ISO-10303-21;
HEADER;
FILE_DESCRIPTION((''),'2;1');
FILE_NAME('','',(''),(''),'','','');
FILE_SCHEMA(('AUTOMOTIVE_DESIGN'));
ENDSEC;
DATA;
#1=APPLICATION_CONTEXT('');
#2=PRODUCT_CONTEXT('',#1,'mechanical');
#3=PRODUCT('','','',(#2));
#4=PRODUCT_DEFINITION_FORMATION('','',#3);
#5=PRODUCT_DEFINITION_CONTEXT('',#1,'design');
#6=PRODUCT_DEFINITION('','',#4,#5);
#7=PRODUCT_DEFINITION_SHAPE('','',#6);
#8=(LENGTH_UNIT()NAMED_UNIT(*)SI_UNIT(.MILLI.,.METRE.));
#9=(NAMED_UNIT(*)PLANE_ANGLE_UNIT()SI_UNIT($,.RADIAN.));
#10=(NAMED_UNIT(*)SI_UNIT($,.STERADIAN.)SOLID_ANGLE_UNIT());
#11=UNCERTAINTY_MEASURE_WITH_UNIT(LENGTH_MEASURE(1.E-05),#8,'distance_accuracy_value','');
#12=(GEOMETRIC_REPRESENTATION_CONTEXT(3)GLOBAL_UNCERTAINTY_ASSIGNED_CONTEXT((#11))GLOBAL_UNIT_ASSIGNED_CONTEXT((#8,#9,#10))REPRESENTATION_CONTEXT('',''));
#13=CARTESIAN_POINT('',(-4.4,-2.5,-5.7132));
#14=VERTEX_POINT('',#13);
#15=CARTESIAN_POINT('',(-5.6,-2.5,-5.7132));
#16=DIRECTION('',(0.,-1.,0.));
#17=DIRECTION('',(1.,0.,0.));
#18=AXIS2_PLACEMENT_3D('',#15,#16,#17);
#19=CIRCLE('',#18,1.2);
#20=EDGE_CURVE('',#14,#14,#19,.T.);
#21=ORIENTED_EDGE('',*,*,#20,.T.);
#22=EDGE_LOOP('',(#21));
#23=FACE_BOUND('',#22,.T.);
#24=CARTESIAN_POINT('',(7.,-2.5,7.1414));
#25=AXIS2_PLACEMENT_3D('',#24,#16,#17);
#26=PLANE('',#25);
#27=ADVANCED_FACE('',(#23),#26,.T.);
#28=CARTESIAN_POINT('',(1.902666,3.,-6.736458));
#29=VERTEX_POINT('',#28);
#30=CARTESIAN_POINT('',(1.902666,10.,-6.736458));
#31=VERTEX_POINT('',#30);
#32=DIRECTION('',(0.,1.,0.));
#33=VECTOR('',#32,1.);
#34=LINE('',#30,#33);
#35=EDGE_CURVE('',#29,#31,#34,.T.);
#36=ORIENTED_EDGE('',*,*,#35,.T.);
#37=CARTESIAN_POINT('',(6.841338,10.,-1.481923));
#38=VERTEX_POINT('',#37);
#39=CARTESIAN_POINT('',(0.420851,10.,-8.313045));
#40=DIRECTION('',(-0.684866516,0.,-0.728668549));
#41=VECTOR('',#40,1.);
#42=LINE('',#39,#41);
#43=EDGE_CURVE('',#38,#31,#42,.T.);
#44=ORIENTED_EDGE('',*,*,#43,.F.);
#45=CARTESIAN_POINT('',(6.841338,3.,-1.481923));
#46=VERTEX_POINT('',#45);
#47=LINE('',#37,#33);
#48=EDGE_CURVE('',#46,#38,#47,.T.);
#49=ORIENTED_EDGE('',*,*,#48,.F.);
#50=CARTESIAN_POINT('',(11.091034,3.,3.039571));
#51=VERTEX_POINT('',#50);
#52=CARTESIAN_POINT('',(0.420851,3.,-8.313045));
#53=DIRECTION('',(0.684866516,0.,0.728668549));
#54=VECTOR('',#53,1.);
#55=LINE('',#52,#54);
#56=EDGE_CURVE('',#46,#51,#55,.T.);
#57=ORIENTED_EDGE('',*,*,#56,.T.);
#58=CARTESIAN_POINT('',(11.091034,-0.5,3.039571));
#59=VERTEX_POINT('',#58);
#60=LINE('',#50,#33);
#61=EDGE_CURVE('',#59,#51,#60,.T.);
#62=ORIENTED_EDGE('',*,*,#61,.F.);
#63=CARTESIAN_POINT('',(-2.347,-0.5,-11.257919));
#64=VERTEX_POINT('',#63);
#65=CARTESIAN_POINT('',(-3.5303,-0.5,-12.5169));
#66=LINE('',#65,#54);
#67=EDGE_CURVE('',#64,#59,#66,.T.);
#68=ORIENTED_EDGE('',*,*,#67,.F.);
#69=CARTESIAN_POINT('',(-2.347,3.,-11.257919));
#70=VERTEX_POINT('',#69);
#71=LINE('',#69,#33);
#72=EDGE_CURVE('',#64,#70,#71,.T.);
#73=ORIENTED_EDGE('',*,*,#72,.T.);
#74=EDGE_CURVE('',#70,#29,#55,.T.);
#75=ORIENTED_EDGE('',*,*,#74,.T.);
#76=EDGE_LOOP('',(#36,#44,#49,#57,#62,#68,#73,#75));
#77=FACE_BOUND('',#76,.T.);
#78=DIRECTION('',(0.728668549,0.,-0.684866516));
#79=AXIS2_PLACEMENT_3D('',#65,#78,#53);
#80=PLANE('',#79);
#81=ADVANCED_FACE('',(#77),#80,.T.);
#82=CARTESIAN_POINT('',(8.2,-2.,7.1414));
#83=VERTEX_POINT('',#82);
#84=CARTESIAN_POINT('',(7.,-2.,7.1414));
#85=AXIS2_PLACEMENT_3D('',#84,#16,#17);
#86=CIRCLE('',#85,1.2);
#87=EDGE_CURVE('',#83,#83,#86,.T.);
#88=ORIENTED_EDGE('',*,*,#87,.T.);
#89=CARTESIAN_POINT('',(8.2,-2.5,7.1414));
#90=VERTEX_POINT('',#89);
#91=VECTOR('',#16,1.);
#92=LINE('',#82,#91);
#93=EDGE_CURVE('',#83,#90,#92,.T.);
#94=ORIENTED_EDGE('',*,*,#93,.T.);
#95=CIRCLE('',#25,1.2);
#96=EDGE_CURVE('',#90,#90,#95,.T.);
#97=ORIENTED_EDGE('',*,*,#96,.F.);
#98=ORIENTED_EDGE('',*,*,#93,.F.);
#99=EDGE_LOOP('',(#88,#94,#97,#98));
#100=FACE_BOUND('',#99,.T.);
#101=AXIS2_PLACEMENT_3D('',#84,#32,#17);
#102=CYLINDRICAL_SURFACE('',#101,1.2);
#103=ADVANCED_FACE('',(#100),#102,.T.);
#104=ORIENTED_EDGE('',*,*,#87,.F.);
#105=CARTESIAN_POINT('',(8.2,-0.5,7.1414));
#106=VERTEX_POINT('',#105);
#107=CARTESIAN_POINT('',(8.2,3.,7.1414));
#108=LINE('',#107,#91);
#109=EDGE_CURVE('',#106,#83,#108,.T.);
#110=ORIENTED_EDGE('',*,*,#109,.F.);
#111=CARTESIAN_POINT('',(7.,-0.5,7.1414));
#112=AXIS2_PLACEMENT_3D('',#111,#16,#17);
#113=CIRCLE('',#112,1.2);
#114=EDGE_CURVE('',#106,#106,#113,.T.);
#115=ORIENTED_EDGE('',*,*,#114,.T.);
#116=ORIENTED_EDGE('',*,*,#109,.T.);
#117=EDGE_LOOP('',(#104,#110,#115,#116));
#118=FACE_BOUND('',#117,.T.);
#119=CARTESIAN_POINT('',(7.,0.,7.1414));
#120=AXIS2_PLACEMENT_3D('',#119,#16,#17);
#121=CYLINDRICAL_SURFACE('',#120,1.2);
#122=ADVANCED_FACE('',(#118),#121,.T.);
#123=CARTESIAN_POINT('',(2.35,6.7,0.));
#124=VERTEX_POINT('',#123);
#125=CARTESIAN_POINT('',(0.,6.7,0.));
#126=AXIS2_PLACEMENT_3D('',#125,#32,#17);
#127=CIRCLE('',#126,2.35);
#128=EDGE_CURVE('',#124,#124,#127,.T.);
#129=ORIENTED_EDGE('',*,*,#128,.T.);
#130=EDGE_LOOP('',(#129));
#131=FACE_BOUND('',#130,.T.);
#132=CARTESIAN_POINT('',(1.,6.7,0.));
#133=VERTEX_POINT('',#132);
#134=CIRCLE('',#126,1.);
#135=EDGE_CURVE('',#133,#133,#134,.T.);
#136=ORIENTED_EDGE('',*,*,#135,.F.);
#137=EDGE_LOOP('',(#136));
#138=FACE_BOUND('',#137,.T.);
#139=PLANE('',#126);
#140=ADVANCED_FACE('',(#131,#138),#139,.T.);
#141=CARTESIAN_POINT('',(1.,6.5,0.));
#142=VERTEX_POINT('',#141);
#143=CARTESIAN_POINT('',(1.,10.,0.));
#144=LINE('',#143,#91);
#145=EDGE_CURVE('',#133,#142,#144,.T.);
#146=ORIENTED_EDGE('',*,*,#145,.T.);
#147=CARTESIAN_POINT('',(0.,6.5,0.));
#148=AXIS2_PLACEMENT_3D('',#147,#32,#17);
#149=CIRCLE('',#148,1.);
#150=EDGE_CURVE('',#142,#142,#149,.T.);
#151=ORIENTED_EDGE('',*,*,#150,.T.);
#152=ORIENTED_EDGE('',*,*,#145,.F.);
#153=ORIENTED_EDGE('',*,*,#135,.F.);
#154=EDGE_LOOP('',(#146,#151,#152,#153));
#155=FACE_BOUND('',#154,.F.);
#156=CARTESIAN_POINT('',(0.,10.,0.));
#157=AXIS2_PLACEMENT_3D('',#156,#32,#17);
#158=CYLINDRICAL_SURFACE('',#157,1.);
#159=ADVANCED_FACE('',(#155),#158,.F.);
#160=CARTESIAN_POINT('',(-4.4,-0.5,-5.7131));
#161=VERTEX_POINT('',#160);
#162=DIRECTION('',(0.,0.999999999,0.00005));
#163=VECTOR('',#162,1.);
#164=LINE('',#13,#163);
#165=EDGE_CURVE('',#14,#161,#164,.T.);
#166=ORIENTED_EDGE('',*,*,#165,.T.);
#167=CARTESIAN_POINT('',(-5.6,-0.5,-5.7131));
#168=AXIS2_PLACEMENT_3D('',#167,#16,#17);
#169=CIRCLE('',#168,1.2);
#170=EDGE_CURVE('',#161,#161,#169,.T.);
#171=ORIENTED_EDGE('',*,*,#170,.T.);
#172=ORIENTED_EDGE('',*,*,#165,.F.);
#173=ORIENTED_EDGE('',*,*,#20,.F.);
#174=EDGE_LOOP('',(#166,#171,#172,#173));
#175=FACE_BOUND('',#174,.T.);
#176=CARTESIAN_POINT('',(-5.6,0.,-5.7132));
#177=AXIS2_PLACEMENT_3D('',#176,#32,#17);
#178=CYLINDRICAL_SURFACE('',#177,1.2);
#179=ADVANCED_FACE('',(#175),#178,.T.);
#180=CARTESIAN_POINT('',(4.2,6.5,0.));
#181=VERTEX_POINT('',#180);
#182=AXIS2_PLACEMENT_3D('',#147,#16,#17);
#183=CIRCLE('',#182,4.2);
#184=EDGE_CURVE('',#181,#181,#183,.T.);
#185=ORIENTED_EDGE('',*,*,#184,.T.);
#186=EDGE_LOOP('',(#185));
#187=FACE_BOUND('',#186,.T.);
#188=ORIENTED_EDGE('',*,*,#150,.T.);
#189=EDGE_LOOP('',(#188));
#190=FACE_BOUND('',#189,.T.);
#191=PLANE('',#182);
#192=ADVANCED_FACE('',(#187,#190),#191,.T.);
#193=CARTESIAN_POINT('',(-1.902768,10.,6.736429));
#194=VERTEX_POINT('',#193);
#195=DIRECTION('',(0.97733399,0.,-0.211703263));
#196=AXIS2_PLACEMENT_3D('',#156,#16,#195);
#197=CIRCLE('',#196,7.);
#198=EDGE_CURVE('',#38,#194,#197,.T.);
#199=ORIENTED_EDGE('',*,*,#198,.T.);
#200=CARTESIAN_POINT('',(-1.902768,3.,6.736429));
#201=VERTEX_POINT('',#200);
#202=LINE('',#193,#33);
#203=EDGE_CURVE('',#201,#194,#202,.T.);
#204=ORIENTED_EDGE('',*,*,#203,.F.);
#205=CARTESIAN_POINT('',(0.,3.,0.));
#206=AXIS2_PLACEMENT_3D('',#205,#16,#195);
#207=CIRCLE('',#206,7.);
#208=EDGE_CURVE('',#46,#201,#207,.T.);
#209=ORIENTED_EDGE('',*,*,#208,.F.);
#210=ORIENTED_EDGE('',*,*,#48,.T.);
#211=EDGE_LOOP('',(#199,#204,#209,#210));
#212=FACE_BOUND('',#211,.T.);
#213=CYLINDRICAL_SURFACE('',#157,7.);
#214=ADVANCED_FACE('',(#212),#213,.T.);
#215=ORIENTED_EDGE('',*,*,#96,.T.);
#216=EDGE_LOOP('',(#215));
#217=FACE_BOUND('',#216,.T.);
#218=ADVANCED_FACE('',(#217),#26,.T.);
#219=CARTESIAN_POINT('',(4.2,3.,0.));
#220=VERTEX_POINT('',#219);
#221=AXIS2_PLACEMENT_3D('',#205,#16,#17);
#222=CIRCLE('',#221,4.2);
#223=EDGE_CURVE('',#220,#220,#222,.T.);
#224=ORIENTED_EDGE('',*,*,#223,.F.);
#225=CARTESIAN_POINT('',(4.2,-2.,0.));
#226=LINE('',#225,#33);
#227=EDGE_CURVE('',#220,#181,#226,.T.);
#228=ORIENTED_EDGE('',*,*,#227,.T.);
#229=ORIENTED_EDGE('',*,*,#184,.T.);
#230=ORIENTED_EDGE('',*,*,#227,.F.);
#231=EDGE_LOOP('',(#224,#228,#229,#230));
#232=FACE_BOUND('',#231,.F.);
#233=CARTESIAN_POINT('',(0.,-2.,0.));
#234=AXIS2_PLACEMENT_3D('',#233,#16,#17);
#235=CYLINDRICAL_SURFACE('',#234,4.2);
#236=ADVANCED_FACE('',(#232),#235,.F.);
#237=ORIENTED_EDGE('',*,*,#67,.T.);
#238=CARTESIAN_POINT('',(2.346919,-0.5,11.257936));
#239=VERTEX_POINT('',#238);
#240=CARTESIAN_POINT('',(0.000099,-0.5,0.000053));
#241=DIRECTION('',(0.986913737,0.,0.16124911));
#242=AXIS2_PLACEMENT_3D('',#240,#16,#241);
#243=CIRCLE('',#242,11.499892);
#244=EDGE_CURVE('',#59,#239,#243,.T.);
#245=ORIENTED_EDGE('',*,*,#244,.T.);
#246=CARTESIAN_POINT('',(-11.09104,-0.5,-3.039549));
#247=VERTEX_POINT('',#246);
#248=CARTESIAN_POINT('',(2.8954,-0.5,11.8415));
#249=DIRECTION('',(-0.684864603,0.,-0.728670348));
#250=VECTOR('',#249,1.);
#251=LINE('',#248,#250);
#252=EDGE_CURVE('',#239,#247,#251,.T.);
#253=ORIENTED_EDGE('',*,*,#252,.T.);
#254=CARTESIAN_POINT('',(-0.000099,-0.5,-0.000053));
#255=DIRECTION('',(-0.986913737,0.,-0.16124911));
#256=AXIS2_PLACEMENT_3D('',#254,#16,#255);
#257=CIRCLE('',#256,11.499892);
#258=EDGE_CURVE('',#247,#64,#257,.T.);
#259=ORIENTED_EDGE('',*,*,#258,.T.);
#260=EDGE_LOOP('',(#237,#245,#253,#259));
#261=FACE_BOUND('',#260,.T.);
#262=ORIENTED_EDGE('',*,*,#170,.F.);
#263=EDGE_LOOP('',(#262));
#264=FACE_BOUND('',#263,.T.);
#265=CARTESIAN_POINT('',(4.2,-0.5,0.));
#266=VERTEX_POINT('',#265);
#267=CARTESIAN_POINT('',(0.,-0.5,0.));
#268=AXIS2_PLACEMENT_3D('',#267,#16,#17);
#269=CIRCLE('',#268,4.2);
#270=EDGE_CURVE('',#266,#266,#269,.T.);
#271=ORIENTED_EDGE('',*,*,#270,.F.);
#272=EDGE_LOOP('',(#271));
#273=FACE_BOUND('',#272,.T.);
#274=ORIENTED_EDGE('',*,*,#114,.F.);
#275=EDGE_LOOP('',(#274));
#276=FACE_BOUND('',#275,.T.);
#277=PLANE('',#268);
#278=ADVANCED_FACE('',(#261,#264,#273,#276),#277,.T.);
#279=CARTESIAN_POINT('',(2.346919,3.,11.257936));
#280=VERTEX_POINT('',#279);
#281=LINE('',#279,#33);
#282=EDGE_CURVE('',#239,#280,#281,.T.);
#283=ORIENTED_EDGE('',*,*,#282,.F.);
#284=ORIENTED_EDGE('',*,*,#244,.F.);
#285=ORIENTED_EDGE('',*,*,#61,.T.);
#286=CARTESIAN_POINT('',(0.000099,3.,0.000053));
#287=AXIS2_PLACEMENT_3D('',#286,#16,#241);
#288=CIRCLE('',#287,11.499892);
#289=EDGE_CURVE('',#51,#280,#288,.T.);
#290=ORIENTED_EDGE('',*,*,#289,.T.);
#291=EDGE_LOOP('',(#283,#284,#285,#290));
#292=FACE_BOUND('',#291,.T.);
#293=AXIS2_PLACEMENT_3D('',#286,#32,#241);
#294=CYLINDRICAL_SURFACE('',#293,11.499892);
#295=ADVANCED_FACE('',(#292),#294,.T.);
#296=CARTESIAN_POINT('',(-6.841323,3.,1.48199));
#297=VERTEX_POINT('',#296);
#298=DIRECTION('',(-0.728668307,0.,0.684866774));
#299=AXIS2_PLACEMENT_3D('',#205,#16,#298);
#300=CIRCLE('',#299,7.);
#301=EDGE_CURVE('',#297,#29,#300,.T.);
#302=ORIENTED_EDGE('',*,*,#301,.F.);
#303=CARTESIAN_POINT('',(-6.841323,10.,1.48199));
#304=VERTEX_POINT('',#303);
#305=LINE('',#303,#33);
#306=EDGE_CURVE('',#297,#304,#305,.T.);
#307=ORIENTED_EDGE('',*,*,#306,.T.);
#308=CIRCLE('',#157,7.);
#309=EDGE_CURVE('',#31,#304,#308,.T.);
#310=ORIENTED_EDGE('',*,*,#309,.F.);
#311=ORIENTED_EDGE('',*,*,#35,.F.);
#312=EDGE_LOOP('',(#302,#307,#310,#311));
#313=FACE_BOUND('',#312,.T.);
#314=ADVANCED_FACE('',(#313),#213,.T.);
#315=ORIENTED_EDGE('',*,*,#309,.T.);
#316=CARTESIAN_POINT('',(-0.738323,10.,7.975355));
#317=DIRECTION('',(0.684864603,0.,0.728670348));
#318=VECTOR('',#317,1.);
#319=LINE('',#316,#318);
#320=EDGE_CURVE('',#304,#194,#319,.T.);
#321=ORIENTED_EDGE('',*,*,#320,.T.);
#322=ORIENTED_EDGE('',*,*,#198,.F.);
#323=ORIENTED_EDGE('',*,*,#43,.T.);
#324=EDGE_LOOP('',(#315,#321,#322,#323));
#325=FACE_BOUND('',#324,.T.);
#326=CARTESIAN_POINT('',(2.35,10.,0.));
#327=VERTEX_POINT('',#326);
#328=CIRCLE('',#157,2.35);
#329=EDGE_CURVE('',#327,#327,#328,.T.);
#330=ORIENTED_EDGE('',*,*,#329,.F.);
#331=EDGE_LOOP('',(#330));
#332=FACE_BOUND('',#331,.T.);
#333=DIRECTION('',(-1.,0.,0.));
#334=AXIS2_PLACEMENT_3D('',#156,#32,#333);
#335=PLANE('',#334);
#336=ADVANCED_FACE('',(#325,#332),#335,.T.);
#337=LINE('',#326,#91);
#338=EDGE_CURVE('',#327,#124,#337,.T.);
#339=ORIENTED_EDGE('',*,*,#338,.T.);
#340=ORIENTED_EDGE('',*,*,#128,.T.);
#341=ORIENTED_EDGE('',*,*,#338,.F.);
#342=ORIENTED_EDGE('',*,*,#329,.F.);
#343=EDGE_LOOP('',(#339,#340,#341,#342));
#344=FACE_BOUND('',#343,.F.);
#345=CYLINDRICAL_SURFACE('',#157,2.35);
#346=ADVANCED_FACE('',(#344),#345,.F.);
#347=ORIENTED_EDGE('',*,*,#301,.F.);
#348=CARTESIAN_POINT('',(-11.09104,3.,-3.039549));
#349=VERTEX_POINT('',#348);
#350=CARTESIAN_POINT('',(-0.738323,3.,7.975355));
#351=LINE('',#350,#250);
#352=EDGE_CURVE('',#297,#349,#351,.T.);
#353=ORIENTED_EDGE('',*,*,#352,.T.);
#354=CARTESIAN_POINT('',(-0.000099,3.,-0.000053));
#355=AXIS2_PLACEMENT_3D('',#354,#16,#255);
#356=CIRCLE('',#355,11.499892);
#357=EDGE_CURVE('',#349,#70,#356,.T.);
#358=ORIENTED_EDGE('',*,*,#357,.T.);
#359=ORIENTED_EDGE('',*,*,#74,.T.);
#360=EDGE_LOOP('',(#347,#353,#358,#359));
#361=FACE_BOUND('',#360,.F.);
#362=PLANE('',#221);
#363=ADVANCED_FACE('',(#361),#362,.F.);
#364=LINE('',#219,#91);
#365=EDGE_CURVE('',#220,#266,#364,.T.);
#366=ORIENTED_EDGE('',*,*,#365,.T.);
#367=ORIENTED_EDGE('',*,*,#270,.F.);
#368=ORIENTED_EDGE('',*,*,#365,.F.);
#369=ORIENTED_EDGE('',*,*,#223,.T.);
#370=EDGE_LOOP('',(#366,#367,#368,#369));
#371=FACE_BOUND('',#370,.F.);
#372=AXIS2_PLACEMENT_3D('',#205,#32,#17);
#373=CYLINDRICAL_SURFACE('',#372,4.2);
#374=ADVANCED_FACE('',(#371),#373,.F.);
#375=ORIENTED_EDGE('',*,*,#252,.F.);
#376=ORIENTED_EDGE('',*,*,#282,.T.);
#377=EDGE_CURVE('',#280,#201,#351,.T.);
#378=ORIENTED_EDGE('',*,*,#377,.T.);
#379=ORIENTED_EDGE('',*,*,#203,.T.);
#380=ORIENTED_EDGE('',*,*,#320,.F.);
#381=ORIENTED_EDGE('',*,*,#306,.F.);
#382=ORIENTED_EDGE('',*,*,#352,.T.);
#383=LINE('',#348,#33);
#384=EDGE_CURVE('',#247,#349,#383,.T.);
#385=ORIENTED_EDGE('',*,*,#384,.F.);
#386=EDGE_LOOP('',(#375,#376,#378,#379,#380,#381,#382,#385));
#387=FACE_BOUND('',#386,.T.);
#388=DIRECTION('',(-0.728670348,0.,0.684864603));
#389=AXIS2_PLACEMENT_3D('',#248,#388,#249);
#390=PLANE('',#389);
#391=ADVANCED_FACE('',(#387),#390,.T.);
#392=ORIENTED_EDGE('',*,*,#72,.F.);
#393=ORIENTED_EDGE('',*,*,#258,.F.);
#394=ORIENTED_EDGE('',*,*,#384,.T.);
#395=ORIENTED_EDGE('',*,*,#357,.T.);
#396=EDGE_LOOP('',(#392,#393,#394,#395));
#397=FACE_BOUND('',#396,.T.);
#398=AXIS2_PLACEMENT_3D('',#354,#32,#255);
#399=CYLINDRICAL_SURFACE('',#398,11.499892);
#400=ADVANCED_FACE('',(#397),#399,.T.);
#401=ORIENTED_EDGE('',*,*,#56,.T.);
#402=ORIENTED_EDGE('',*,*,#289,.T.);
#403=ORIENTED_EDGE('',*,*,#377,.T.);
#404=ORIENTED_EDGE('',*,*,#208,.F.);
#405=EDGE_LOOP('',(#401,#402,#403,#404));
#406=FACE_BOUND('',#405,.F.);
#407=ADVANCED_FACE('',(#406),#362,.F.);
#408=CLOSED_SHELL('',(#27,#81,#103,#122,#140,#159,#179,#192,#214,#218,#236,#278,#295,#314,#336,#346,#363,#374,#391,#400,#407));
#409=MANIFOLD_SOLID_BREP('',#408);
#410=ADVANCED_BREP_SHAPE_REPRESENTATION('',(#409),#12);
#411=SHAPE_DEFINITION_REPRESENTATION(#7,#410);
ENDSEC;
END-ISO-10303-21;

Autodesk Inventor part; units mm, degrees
ref_plane "YZ Plane" through (0, 0, 0) normal (1, 0, 0) x (0, 1, 0)
ref_plane "XZ Plane" through (0, 0, 0) normal (0, 1, 0) x (-1, 0, 0)
ref_plane "XY Plane" through (0, 0, 0) normal (0, 0, 1) x (1, 0, 0)
sketch "Skizze1" plane through (0, 0, 0) normal (0, 1, 0) x (-1, 0, 0)
  circle A0 centre (0, 0) radius 15
  dimension "d0" = 30
extrude "Extrusion1" add sketch "Skizze1" along normal blind 10
sketch "Skizze2" plane through (0, 0, 0) normal (0, -1, 0) x (1, 0, 0)
  line L0 (14.3188, 0.9) -> (12.9688, 0.9)
  line L1 (12.9688, -0.9) -> (14.3188, -0.9)
  line L2 (14.3188, -0.9) -> (14.3188, 0.9)
  line L3 (-21.3175, 0) -> (21.3175, 0) projected
  arc A0 (12.9688, 0.9) -> (0.9, 12.9688) centre (0, 0) ccw
  line L4 (-0.9, -12.9688) -> (-0.9, -14.3188)
  line L5 (-0.9, -14.3188) -> (0.9, -14.3188)
  line L6 (0.9, -14.3188) -> (0.9, -12.9688)
  line L7 (-12.9688, 0.9) -> (-14.3188, 0.9)
  line L8 (-14.3188, 0.9) -> (-14.3188, -0.9)
  line L9 (-14.3188, -0.9) -> (-12.9688, -0.9)
  line L10 (-0.9, 12.9688) -> (-0.9, 14.3188)
  line L11 (-0.9, 14.3188) -> (0.9, 14.3188)
  line L12 (0.9, 14.3188) -> (0.9, 12.9688)
  line L13 (0, -21.3175) -> (0, 21.3175) projected
  line L14 (-21.3175, 0) -> (21.3175, 0) projected
  arc A1 (0.9, -12.9688) -> (12.9688, -0.9) centre (0, 0) ccw
  arc A2 (-12.9688, -0.9) -> (-0.9, -12.9688) centre (0, 0) ccw
  arc A3 (-0.9, 12.9688) -> (-12.9688, 0.9) centre (0, 0) ccw
  circle A4 centre (0, 0) radius 4.2
  circle A5 centre (7, 7.1414) radius 1.2
  circle A6 centre (-5.6, -5.7131) radius 1.2
  dimension "d4" = 0.9
  dimension "d5" = 0.9
  dimension "d8" = 1.35
  dimension "d9" = 1.35
  dimension "d10" = 1.8
  dimension "d11" = 0.9
  dimension "d12" = 1.35
  dimension "d13" = 1.8
  dimension "d14" = 0.9
  dimension "d15" = 0.9
  dimension "d16" = 1.35
  dimension "d17" = 8.4
  dimension "d18" = 2.4
  dimension "d19" = 2.4
  dimension "d20" = 8
  dimension "d21" = 10
  dimension "d22" = 7
  dimension "d23" = 5.6
  dimension "d50" = 13
  dimension "d51" = 13
  dimension "d52" = 1.35
  dimension "d53" = 1.35
  dimension "d54" = 1.35
extrude "Extrusion2" cut sketch "Skizze2" against normal blind 3 contours L2 L3 A4 L13 L11 L12 A0 L0 | L2 L1 A1 L6 L5 L13 A4 L3 | A4 L3 L8 L7 A3 L10 L11 L13 | L13 L5 L4 A2 L9 L8 L3 A4
sketch "Skizze4" plane through (7, 0, 7.1414) normal (0, -1, 0) x (1, 0, 0)
  circle A0 centre (-7, -7.1414) radius 4.2
  circle A1 centre (-12.6, -12.8546) radius 1.2
  circle A2 centre (0, 0) radius 1.2
  line L0 (-7, -28.1414) -> (-7, 13.8586) projected
  dimension "d26" = 2.4
  dimension "d27" = 5.6
  dimension "d28" = 8
  dimension "d44" = 8.4
  dimension "d45" = 2.4
extrude "Extrusion3" add sketch "Skizze4" along normal blind 2
sketch "Skizze5" plane through (0, 10, 0) normal (0, 1, 0) x (1, 0, 0)
  circle A0 centre (0, 0) radius 19.262
  circle A1 centre (0, 0) radius 7
  dimension "d31" = 14
extrude "Extrusion4" cut sketch "Skizze5" against normal blind 7
fillet "Rundung1" radius 1 8 edges at (12.9688, 1.5, -0.9) (12.9688, 1.5, 0.9) (0.9, 1.5, -12.9688) (-0.9, 1.5, -12.9688) (-12.9688, 1.5, -0.9) (-12.9688, 1.5, 0.9) (-0.9, 1.5, 12.9688) (0.9, 1.5, 12.9688)
sketch "Skizze8" plane through (0, 10, 0) normal (0, 1, 0) x (1, 0, 0)
  circle A0 centre (0, 0) radius 1
  dimension "d46" = 2
extrude "Extrusion7" cut sketch "Skizze8" against normal blind 7
sketch "Skizze9" plane through (0, -2, 0) normal (0, -1, 0) x (1, 0, 0)
  line L0 (18.2687, 9.2162) -> (-7.478, -18.1772)
  line L1 (-7.478, -18.1772) -> (18.2687, -18.1772)
  line L2 (18.2687, -18.1772) -> (18.2687, 9.2162)
  line L3 (8.0673, 18.8043) -> (-17.6793, -8.5891)
  line L4 (-17.6793, -8.5891) -> (-17.6793, 18.8043)
  line L5 (-17.6793, 18.8043) -> (8.0673, 18.8043)
  point P0 (0, 0)
  dimension "d55" = 7
  dimension "d56" = 7
extrude "Extrusion8" cut sketch "Skizze9" against normal blind 50
sketch "Skizze10" plane through (0, -2, 0) normal (0, -1, 0) x (1, 0, 0)
  circle A0 centre (0, 0) radius 11.5
  circle A1 centre (0, 0) radius 18.9246
  dimension "d61" = 23
extrude "Extrusion9" cut sketch "Skizze10" against normal blind 10
sketch "Skizze11" plane through (0, -2, 0) normal (0, -1, 0) x (1, 0, 0)
  circle A0 centre (0, 0) radius 1 projected
  circle A1 centre (0, 0) radius 4.2
extrude "Extrusion10" cut sketch "Skizze11" against normal blind 8.5 contours A0 | A1
sketch "Skizze13" plane through (0, 3, 0) normal (0, -1, 0) x (1, 0, 0)
  circle A0 centre (7, 7.1414) radius 1.2 projected
  circle A1 centre (7, 7.1414) radius 1.2
  circle A2 centre (-5.6, -5.7131) radius 1.2 projected
  circle A3 centre (-5.6, -5.7131) radius 1.2
  arc A4 (11.3495, 1.8544) -> (1.1481, 11.4425) centre (0, 0) ccw
  line L0 (11.3495, 1.8544) -> (8.9749, -0.6721) projected
  line L1 (11.3495, 1.8544) -> (-1.1481, -11.4425)
  line L2 (1.1481, 11.4425) -> (-11.3495, -1.8544)
  line L3 (1.2265, -8.916) -> (-1.1481, -11.4425) projected
  arc A5 (-11.3495, -1.8544) -> (-1.1481, -11.4425) centre (0, 0) ccw
  circle A6 centre (0, 0) radius 4.2
extrude "Extrusion11" add sketch "Skizze13" along normal blind 3.5
sketch "Skizze14" plane through (7, -2, 7.1414) normal (0, -1, 0) x (1, 0, 0)
  circle A0 centre (0, 0) radius 1.2 projected
  circle A1 centre (0, 0) radius 1.2
  circle A2 centre (-12.6, -12.8546) radius 1.2 projected
  circle A3 centre (-12.6, -12.8546) radius 1.2
  point P0 (-7, -7.1414)
extrude "Extrusion12" add sketch "Skizze14" along normal blind 0.5
sketch "Skizze15" plane through (0, 10, 0) normal (0, 1, 0) x (1, 0, 0)
  circle A0 centre (0, 0) radius 1 projected
  circle A1 centre (0, 0) radius 2.35
  dimension "d68" = 4.7
extrude "Extrusion13" cut sketch "Skizze15" against normal blind 3.3 contours A0 | A1
sketch "Skizze17" plane through (0, -0.5, 0) normal (0, -1, 0) x (1, 0, 0)
  line L0 (2.8954, 11.8415) -> (-13.3125, -5.4031)
  line L1 (1.1481, 11.4425) -> (-5.1007, 4.7941) projected
  line L2 (-13.3125, -5.4031) -> (-13.3125, 19.7684)
  line L3 (-13.3125, 19.7684) -> (2.8954, 11.8415)
  line L4 (-3.5303, -12.5169) -> (12.8557, 4.9171)
  line L5 (-1.1481, -11.4425) -> (5.1007, -4.7941) projected
  line L6 (12.8557, 4.9171) -> (12.8557, -12.5169)
  line L7 (12.8557, -12.5169) -> (-3.5303, -12.5169)
  point P0 (0, 0)
  dimension "d71" = 1
  dimension "d72" = 1
extrude "Extrusion14" cut sketch "Skizze17" against normal blind 15
properties part number "Adaptation_on_OPdevside_4_4"
